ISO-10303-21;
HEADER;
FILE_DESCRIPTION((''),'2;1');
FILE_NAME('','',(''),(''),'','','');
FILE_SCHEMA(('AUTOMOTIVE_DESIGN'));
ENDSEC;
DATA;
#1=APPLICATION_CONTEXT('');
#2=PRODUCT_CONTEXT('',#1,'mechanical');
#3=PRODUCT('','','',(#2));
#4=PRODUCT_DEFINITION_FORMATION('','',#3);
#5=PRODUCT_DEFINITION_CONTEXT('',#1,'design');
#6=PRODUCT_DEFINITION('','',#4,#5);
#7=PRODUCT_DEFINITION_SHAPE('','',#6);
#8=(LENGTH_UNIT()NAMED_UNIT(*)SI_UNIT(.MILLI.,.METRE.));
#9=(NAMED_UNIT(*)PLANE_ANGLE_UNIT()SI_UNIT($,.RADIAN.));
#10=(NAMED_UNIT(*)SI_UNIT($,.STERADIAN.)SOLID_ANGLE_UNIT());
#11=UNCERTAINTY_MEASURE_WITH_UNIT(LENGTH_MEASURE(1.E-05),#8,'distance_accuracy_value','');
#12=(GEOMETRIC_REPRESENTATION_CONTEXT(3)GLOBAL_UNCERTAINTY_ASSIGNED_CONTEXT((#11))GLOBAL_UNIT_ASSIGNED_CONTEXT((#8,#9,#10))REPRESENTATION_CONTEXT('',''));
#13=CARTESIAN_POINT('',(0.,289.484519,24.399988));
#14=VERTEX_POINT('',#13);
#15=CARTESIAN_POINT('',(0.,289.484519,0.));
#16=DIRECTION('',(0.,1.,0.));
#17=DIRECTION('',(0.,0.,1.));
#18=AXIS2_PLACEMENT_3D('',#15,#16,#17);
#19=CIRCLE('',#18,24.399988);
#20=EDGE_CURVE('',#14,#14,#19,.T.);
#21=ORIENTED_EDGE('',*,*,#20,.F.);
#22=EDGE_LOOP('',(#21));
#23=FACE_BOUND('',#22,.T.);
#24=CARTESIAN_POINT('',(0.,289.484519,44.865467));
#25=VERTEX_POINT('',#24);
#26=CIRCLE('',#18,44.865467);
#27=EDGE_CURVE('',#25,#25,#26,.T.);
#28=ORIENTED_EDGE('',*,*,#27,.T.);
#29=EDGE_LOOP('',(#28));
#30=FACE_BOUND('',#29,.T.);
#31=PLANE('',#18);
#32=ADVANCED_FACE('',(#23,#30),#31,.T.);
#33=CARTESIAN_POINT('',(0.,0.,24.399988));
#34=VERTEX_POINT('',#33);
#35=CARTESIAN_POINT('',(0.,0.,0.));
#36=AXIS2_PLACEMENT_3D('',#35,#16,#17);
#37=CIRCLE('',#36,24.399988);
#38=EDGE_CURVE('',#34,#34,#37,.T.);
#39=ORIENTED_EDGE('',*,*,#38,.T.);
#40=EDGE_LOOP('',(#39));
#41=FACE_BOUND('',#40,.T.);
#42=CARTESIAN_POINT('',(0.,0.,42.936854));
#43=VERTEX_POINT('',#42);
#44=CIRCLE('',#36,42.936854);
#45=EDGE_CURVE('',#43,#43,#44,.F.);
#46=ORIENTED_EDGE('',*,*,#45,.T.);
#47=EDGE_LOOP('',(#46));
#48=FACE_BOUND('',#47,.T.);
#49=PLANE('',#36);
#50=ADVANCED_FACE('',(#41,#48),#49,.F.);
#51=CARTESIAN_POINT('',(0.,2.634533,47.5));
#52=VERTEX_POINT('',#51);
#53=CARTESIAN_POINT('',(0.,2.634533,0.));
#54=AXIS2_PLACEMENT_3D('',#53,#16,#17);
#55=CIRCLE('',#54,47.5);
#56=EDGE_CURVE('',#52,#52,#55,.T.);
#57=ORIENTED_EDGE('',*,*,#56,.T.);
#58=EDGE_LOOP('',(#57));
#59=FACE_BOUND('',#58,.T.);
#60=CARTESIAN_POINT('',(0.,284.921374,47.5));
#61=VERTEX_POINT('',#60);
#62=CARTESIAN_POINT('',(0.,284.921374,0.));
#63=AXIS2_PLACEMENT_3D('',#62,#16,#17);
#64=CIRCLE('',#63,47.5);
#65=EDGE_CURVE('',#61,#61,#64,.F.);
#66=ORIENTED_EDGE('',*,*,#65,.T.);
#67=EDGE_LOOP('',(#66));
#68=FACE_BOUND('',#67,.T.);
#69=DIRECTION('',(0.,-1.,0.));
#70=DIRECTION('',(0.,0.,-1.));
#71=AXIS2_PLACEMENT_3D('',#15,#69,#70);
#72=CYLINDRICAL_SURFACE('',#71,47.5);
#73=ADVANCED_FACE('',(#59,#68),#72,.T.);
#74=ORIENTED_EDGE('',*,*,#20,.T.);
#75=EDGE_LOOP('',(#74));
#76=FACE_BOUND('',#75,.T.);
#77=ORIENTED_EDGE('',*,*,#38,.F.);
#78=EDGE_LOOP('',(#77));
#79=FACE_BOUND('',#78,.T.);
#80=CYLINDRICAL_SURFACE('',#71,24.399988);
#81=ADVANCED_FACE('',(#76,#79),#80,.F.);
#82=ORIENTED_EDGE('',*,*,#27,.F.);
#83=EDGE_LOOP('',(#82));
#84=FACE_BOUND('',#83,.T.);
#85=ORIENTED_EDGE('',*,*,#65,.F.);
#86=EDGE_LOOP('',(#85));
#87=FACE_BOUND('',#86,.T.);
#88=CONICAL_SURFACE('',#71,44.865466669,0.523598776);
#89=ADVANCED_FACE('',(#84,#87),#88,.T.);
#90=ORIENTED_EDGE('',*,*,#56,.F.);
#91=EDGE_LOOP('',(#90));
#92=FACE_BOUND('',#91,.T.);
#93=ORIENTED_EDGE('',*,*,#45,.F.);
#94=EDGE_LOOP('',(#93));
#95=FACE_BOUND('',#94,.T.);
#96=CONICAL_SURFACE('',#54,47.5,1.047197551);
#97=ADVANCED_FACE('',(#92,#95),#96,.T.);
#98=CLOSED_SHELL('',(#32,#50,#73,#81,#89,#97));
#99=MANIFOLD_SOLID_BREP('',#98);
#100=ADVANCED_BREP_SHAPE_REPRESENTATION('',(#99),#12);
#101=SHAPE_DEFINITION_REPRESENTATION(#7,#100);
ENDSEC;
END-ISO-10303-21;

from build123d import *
from OCP.BRepFilletAPI import BRepFilletAPI_MakeChamfer

# Parameters (mm, degrees)
SKETCH1_R           = 47.5
BOSS_EXTRUDE1_DEPTH = 289.484519406
SKETCH2_R           = 24.399987989
CUT_EXTRUDE1_DEPTH  = 298.17635669
CHAMFER1_SIZE       = 4.563145584
CHAMFER1_SIZE2      = 2.634533331


with BuildPart() as part:
    # Sketch1 → Boss-Extrude1 (new body)
    with BuildSketch(Plane(origin=(0, 0, 0), x_dir=(1, 0, 0), z_dir=(0, 1, 0))):
        Circle(SKETCH1_R)
    extrude(amount=BOSS_EXTRUDE1_DEPTH)

    # Sketch2 → Cut-Extrude1 (cut, through all)
    with BuildSketch(Plane(origin=(0, 0, 0), x_dir=(1, 0, 0), z_dir=(0, 1, 0))):
        Circle(SKETCH2_R)
    extrude(amount=CUT_EXTRUDE1_DEPTH, mode=Mode.SUBTRACT)

    # Chamfer1: one chamfer whose edges measure the first distance from different faces: ONE call of the kernel's chamfer builder (chamfer() names one face for all edges)
    chamfer1_edges_1 = [part.edges().sort_by_distance(p)[0] for p in [
        (-47.5, 289.484519406, 0),
    ]]
    chamfer1_side_1 = [part.faces().sort_by_distance(p)[0] for p in [
        (-47.5, 144.742259703, 0),
    ]]
    chamfer1_edges_2 = [part.edges().sort_by_distance(p)[0] for p in [
        (-47.5, 0, 0),
    ]]
    chamfer1_side_2 = [part.faces().sort_by_distance(p)[0] for p in [
        (-46.156497116, 0, 0),
    ]]
    chamfer1 = BRepFilletAPI_MakeChamfer(part.part.solid().wrapped)
    for e in chamfer1_edges_1:
        chamfer1.Add(CHAMFER1_SIZE, CHAMFER1_SIZE2, e.wrapped, chamfer1_side_1[0].wrapped)  # the first distance lies on this face
    for e in chamfer1_edges_2:
        chamfer1.Add(CHAMFER1_SIZE, CHAMFER1_SIZE2, e.wrapped, chamfer1_side_2[0].wrapped)  # the first distance lies on this face
    add(Compound.cast(chamfer1.Shape()), mode=Mode.REPLACE)


solid = part.part
